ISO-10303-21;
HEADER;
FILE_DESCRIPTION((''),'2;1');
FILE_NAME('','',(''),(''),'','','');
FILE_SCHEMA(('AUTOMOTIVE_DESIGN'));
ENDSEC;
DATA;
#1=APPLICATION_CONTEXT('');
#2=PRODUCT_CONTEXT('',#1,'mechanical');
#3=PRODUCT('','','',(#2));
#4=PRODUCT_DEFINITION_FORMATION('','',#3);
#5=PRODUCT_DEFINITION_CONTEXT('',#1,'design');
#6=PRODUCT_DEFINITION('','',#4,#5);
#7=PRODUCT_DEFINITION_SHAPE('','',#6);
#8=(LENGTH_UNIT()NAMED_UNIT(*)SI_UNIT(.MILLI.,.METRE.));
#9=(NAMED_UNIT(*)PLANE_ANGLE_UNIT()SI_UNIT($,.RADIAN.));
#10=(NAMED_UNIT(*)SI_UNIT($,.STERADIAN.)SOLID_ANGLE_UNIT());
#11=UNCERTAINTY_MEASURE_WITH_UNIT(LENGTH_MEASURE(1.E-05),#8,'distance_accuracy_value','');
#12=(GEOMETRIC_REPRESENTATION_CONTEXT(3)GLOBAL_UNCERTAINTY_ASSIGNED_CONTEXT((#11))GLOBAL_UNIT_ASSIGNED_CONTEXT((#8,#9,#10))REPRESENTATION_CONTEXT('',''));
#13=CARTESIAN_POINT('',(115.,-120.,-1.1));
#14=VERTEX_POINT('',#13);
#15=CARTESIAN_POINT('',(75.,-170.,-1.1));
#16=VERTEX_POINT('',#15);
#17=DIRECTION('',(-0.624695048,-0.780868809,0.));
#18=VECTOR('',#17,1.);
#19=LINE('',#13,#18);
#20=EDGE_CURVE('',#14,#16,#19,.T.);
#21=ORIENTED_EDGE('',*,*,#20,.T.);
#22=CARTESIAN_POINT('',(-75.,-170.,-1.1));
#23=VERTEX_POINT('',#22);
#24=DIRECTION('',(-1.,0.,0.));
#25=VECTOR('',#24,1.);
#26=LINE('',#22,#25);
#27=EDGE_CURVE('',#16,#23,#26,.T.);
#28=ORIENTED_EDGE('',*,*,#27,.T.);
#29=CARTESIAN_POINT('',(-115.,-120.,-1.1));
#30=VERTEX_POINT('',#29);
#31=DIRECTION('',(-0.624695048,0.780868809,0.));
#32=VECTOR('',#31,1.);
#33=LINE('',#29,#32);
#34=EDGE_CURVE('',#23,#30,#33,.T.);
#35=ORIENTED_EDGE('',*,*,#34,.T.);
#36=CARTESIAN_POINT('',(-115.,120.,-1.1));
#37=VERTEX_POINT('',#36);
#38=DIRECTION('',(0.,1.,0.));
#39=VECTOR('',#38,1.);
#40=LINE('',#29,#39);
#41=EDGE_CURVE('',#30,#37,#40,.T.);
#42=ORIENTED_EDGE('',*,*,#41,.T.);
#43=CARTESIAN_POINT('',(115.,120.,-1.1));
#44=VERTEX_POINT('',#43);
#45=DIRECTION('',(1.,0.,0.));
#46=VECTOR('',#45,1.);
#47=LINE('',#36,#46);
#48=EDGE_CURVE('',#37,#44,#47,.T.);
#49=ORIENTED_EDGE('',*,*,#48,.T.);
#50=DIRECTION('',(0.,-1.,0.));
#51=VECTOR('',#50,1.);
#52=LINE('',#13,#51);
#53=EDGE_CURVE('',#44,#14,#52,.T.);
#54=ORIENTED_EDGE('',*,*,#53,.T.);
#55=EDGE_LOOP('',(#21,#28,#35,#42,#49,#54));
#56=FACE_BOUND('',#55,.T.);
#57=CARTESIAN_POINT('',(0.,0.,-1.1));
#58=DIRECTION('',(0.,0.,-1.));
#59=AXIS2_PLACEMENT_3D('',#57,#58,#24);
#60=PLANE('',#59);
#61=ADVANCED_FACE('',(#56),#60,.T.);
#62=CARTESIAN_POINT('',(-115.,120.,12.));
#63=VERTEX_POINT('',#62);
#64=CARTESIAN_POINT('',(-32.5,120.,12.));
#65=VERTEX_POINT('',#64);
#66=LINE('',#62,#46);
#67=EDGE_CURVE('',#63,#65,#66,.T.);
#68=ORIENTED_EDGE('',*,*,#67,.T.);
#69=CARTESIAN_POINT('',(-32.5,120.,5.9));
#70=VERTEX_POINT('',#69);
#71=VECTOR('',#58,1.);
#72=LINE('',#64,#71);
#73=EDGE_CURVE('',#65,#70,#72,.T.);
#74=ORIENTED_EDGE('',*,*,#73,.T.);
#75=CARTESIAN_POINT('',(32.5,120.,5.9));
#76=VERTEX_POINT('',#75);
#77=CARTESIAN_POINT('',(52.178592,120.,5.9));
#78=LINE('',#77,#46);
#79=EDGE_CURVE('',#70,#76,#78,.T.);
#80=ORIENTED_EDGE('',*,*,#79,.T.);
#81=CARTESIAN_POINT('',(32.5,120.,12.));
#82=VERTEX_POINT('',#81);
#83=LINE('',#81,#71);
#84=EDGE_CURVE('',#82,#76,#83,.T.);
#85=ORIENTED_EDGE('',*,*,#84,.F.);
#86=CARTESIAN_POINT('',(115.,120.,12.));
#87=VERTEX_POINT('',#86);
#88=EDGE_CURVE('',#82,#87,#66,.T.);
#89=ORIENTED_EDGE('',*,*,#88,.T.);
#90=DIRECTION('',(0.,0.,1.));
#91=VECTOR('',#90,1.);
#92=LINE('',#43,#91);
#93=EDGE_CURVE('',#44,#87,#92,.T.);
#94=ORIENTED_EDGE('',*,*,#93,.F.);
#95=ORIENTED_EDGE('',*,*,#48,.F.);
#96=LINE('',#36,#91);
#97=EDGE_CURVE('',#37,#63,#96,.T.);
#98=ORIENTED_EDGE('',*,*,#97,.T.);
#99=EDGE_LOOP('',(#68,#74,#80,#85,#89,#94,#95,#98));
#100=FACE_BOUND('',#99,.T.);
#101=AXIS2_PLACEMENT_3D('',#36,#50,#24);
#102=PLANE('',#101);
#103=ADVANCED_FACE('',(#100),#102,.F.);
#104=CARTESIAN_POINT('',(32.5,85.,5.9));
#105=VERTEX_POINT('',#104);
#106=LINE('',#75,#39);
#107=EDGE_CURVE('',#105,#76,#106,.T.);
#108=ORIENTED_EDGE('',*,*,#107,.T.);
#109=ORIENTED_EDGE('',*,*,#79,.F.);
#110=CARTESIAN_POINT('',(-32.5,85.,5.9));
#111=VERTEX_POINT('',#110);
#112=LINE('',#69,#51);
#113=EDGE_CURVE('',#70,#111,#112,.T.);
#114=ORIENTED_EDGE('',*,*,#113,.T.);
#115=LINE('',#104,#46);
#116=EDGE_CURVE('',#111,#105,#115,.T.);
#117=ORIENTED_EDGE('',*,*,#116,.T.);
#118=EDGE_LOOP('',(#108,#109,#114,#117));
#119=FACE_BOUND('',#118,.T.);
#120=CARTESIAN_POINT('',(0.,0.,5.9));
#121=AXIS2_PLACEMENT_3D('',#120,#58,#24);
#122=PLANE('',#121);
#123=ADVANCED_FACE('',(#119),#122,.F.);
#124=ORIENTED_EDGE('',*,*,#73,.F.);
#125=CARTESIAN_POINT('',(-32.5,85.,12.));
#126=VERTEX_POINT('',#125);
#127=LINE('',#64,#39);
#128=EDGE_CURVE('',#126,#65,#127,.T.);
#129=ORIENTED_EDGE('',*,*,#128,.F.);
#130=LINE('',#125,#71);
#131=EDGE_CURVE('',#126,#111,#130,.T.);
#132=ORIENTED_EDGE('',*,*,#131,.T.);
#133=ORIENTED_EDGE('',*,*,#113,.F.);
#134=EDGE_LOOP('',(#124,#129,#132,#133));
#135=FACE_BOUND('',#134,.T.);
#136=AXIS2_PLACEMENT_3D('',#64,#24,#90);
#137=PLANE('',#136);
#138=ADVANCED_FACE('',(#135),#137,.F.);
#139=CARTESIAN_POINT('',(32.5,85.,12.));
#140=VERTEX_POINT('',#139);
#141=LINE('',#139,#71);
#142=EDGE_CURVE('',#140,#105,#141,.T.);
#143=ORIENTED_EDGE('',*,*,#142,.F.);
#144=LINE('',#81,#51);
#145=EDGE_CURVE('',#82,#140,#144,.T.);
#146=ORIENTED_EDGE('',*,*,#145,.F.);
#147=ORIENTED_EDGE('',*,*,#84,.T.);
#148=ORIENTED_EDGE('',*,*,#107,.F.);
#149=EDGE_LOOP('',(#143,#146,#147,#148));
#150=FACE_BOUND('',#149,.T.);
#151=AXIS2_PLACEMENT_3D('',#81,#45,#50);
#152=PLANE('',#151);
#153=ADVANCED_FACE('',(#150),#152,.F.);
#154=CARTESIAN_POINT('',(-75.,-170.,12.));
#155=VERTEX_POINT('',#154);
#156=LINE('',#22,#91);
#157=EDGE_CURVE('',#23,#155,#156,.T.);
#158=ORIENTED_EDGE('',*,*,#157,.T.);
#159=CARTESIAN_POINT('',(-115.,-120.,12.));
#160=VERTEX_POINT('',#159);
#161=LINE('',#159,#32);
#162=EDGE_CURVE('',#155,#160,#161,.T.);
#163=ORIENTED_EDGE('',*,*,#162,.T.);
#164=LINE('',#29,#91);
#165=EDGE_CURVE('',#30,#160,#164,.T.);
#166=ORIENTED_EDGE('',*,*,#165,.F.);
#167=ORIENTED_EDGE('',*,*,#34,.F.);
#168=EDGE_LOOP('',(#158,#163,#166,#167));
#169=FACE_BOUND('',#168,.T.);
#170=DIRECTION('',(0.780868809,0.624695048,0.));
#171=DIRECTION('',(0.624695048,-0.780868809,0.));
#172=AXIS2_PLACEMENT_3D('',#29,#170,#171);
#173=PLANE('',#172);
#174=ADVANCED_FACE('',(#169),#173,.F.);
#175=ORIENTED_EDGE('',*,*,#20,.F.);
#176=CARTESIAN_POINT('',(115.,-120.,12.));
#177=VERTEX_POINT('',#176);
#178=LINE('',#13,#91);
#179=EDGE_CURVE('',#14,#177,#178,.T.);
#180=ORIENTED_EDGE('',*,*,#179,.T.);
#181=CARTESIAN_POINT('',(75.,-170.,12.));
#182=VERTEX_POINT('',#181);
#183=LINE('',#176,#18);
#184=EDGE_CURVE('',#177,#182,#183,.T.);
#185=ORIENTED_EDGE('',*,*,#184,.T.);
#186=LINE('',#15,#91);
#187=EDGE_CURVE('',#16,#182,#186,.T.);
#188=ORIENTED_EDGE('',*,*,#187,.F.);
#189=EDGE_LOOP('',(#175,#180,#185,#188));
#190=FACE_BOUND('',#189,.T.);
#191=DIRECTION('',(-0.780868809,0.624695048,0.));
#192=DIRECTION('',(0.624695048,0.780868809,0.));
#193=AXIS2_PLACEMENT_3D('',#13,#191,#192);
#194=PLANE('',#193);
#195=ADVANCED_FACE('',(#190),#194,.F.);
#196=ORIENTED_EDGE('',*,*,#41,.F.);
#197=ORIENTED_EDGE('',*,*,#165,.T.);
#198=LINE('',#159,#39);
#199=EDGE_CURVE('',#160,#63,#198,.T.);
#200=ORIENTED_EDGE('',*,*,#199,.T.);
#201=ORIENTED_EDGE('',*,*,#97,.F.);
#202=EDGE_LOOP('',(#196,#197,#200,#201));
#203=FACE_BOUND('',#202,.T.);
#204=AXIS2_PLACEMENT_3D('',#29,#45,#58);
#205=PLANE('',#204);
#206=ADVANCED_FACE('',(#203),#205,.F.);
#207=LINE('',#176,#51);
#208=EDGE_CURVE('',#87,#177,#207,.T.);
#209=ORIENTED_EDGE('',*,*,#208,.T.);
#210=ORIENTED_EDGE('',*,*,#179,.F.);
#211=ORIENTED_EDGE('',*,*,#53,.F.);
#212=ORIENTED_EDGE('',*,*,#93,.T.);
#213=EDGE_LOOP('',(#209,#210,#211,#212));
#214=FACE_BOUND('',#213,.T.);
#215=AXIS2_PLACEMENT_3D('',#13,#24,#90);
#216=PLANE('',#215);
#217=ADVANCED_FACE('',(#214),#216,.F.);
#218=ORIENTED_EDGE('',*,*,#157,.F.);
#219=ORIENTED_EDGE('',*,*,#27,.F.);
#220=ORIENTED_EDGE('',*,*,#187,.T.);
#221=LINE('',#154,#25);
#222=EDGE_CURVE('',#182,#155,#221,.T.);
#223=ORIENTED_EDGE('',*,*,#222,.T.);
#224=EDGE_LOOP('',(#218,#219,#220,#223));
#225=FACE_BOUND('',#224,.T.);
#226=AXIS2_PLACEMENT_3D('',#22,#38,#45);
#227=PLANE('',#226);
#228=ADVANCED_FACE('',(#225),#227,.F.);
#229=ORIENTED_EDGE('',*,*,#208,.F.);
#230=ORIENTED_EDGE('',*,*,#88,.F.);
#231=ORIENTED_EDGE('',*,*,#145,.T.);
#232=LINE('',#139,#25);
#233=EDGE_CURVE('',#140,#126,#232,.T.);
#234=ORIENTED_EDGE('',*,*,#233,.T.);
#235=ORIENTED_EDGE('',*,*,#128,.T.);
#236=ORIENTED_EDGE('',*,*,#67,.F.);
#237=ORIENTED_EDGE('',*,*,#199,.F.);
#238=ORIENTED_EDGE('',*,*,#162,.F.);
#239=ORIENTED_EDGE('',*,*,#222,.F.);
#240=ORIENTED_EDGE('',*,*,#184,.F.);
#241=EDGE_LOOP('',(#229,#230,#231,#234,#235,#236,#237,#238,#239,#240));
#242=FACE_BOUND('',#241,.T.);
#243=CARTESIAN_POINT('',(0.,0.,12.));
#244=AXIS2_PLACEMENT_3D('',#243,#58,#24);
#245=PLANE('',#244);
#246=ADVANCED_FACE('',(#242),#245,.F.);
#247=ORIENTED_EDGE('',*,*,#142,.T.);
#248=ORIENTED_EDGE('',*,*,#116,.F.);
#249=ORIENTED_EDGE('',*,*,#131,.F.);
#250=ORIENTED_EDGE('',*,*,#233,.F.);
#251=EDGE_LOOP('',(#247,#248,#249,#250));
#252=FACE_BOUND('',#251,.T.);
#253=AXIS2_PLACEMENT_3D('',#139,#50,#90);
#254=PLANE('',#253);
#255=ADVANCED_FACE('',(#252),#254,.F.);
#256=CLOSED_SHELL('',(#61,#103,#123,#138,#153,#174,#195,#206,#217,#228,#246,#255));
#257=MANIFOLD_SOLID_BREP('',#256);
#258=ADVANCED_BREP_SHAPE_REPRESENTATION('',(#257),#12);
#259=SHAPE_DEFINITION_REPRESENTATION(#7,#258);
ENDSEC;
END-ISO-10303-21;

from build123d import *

# Parameters (mm, degrees)
BOSS_EXTRUDE1_DEPTH   = 13.1
FILLET1_R             = 5
SKETCH2_W             = 65
SKETCH2_H             = 35
CUT_EXTRUDE1_DEPTH    = 206.661396475
SKETCH3_W             = 109.473839025
SKETCH3_H             = 48.944636842
BOSS_EXTRUDE2_DEPTH   = 7
BODY_MOVE_COPY1_ANGLE = 180
DELETEFACE1_START     = -1.1
DELETEFACE1_DEPTH     = 13.1


# Read off the part's stored shape, not the designer's step: DeleteFace1
with BuildPart() as part:
    # Sketch1 → Boss-Extrude1 (new body)
    with BuildSketch(Plane.XY):
        Polygon((115, -120), (115, 120), (-115, 120), (-115, -120), (-75, -170), (75, -170), align=None)
    extrude(amount=BOSS_EXTRUDE1_DEPTH)

    # Fillet1
    fillet1_edges = [part.edges().sort_by_distance(p)[0] for p in [
        (-115, 120, 6.55),
        (115, 120, 6.55),
        (115, -120, 6.55),
        (75, -170, 6.55),
        (-75, -170, 6.55),
        (-115, -120, 6.55),
    ]]
    fillet(fillet1_edges, radius=FILLET1_R)

    # Sketch2 → Cut-Extrude1 (cut, through all)
    with BuildSketch(Plane.XY.offset(13.1)):
        with Locations((0, 102.5)):
            Rectangle(SKETCH2_W, SKETCH2_H)
    extrude(amount=-CUT_EXTRUDE1_DEPTH, mode=Mode.SUBTRACT)

    # Sketch3 → Boss-Extrude2 (add)
    with BuildSketch(Plane.XY.offset(13.1)):
        with Locations((2.558327619, 95.527681579)):
            Rectangle(SKETCH3_W, SKETCH3_H)
    extrude(amount=-BOSS_EXTRUDE2_DEPTH)


with BuildPart() as part_1:
    # Body-Move/Copy1: moved
    add(part.part.rotate(Axis((0, 0, 6), (0, 1, 0)), BODY_MOVE_COPY1_ANGLE))

    # DeleteFace1 outline → DeleteFace1 (add)
    with BuildSketch(Plane.XY.offset(DELETEFACE1_START)):
        with BuildLine():
            ThreePointArc((-72.596875763, -170), (-74.762819415, -169.506516182), (-76.50121981, -168.123475238))
            Line((-76.50121981, -168.123475238), (-75, -170))
            Line((-75, -170), (-72.596875763, -170))
        make_face()
        with BuildLine():
            Line((-115, -120), (-113.904344047, -121.369569941))
            ThreePointArc((-113.904344047, -121.369569941), (-114.718141596, -119.90112941), (-115, -118.246094703))
            Line((-115, -118.246094703), (-115, -120))
        make_face()
        with BuildLine():
            ThreePointArc((76.50121981, -168.123475238), (74.762819415, -169.506516182), (72.596875763, -170))
            Line((72.596875763, -170), (75, -170))
            Line((75, -170), (76.50121981, -168.123475238))
        make_face()
        with BuildLine():
            Line((-115, 120), (-115, 115))
            ThreePointArc((-115, 115), (-113.535533906, 118.535533906), (-110, 120))
            Line((-110, 120), (-115, 120))
        make_face()
        with BuildLine():
            ThreePointArc((115, -118.246094703), (114.718141596, -119.90112941), (113.904344047, -121.369569941))
            Line((113.904344047, -121.369569941), (115, -120))
            Line((115, -120), (115, -118.246094703))
        make_face()
        with BuildLine():
            Line((115, 120), (110, 120))
            ThreePointArc((110, 120), (113.535533906, 118.535533906), (115, 115))
            Line((115, 115), (115, 120))
        make_face()
    extrude(amount=DELETEFACE1_DEPTH)


solid = part_1.part
